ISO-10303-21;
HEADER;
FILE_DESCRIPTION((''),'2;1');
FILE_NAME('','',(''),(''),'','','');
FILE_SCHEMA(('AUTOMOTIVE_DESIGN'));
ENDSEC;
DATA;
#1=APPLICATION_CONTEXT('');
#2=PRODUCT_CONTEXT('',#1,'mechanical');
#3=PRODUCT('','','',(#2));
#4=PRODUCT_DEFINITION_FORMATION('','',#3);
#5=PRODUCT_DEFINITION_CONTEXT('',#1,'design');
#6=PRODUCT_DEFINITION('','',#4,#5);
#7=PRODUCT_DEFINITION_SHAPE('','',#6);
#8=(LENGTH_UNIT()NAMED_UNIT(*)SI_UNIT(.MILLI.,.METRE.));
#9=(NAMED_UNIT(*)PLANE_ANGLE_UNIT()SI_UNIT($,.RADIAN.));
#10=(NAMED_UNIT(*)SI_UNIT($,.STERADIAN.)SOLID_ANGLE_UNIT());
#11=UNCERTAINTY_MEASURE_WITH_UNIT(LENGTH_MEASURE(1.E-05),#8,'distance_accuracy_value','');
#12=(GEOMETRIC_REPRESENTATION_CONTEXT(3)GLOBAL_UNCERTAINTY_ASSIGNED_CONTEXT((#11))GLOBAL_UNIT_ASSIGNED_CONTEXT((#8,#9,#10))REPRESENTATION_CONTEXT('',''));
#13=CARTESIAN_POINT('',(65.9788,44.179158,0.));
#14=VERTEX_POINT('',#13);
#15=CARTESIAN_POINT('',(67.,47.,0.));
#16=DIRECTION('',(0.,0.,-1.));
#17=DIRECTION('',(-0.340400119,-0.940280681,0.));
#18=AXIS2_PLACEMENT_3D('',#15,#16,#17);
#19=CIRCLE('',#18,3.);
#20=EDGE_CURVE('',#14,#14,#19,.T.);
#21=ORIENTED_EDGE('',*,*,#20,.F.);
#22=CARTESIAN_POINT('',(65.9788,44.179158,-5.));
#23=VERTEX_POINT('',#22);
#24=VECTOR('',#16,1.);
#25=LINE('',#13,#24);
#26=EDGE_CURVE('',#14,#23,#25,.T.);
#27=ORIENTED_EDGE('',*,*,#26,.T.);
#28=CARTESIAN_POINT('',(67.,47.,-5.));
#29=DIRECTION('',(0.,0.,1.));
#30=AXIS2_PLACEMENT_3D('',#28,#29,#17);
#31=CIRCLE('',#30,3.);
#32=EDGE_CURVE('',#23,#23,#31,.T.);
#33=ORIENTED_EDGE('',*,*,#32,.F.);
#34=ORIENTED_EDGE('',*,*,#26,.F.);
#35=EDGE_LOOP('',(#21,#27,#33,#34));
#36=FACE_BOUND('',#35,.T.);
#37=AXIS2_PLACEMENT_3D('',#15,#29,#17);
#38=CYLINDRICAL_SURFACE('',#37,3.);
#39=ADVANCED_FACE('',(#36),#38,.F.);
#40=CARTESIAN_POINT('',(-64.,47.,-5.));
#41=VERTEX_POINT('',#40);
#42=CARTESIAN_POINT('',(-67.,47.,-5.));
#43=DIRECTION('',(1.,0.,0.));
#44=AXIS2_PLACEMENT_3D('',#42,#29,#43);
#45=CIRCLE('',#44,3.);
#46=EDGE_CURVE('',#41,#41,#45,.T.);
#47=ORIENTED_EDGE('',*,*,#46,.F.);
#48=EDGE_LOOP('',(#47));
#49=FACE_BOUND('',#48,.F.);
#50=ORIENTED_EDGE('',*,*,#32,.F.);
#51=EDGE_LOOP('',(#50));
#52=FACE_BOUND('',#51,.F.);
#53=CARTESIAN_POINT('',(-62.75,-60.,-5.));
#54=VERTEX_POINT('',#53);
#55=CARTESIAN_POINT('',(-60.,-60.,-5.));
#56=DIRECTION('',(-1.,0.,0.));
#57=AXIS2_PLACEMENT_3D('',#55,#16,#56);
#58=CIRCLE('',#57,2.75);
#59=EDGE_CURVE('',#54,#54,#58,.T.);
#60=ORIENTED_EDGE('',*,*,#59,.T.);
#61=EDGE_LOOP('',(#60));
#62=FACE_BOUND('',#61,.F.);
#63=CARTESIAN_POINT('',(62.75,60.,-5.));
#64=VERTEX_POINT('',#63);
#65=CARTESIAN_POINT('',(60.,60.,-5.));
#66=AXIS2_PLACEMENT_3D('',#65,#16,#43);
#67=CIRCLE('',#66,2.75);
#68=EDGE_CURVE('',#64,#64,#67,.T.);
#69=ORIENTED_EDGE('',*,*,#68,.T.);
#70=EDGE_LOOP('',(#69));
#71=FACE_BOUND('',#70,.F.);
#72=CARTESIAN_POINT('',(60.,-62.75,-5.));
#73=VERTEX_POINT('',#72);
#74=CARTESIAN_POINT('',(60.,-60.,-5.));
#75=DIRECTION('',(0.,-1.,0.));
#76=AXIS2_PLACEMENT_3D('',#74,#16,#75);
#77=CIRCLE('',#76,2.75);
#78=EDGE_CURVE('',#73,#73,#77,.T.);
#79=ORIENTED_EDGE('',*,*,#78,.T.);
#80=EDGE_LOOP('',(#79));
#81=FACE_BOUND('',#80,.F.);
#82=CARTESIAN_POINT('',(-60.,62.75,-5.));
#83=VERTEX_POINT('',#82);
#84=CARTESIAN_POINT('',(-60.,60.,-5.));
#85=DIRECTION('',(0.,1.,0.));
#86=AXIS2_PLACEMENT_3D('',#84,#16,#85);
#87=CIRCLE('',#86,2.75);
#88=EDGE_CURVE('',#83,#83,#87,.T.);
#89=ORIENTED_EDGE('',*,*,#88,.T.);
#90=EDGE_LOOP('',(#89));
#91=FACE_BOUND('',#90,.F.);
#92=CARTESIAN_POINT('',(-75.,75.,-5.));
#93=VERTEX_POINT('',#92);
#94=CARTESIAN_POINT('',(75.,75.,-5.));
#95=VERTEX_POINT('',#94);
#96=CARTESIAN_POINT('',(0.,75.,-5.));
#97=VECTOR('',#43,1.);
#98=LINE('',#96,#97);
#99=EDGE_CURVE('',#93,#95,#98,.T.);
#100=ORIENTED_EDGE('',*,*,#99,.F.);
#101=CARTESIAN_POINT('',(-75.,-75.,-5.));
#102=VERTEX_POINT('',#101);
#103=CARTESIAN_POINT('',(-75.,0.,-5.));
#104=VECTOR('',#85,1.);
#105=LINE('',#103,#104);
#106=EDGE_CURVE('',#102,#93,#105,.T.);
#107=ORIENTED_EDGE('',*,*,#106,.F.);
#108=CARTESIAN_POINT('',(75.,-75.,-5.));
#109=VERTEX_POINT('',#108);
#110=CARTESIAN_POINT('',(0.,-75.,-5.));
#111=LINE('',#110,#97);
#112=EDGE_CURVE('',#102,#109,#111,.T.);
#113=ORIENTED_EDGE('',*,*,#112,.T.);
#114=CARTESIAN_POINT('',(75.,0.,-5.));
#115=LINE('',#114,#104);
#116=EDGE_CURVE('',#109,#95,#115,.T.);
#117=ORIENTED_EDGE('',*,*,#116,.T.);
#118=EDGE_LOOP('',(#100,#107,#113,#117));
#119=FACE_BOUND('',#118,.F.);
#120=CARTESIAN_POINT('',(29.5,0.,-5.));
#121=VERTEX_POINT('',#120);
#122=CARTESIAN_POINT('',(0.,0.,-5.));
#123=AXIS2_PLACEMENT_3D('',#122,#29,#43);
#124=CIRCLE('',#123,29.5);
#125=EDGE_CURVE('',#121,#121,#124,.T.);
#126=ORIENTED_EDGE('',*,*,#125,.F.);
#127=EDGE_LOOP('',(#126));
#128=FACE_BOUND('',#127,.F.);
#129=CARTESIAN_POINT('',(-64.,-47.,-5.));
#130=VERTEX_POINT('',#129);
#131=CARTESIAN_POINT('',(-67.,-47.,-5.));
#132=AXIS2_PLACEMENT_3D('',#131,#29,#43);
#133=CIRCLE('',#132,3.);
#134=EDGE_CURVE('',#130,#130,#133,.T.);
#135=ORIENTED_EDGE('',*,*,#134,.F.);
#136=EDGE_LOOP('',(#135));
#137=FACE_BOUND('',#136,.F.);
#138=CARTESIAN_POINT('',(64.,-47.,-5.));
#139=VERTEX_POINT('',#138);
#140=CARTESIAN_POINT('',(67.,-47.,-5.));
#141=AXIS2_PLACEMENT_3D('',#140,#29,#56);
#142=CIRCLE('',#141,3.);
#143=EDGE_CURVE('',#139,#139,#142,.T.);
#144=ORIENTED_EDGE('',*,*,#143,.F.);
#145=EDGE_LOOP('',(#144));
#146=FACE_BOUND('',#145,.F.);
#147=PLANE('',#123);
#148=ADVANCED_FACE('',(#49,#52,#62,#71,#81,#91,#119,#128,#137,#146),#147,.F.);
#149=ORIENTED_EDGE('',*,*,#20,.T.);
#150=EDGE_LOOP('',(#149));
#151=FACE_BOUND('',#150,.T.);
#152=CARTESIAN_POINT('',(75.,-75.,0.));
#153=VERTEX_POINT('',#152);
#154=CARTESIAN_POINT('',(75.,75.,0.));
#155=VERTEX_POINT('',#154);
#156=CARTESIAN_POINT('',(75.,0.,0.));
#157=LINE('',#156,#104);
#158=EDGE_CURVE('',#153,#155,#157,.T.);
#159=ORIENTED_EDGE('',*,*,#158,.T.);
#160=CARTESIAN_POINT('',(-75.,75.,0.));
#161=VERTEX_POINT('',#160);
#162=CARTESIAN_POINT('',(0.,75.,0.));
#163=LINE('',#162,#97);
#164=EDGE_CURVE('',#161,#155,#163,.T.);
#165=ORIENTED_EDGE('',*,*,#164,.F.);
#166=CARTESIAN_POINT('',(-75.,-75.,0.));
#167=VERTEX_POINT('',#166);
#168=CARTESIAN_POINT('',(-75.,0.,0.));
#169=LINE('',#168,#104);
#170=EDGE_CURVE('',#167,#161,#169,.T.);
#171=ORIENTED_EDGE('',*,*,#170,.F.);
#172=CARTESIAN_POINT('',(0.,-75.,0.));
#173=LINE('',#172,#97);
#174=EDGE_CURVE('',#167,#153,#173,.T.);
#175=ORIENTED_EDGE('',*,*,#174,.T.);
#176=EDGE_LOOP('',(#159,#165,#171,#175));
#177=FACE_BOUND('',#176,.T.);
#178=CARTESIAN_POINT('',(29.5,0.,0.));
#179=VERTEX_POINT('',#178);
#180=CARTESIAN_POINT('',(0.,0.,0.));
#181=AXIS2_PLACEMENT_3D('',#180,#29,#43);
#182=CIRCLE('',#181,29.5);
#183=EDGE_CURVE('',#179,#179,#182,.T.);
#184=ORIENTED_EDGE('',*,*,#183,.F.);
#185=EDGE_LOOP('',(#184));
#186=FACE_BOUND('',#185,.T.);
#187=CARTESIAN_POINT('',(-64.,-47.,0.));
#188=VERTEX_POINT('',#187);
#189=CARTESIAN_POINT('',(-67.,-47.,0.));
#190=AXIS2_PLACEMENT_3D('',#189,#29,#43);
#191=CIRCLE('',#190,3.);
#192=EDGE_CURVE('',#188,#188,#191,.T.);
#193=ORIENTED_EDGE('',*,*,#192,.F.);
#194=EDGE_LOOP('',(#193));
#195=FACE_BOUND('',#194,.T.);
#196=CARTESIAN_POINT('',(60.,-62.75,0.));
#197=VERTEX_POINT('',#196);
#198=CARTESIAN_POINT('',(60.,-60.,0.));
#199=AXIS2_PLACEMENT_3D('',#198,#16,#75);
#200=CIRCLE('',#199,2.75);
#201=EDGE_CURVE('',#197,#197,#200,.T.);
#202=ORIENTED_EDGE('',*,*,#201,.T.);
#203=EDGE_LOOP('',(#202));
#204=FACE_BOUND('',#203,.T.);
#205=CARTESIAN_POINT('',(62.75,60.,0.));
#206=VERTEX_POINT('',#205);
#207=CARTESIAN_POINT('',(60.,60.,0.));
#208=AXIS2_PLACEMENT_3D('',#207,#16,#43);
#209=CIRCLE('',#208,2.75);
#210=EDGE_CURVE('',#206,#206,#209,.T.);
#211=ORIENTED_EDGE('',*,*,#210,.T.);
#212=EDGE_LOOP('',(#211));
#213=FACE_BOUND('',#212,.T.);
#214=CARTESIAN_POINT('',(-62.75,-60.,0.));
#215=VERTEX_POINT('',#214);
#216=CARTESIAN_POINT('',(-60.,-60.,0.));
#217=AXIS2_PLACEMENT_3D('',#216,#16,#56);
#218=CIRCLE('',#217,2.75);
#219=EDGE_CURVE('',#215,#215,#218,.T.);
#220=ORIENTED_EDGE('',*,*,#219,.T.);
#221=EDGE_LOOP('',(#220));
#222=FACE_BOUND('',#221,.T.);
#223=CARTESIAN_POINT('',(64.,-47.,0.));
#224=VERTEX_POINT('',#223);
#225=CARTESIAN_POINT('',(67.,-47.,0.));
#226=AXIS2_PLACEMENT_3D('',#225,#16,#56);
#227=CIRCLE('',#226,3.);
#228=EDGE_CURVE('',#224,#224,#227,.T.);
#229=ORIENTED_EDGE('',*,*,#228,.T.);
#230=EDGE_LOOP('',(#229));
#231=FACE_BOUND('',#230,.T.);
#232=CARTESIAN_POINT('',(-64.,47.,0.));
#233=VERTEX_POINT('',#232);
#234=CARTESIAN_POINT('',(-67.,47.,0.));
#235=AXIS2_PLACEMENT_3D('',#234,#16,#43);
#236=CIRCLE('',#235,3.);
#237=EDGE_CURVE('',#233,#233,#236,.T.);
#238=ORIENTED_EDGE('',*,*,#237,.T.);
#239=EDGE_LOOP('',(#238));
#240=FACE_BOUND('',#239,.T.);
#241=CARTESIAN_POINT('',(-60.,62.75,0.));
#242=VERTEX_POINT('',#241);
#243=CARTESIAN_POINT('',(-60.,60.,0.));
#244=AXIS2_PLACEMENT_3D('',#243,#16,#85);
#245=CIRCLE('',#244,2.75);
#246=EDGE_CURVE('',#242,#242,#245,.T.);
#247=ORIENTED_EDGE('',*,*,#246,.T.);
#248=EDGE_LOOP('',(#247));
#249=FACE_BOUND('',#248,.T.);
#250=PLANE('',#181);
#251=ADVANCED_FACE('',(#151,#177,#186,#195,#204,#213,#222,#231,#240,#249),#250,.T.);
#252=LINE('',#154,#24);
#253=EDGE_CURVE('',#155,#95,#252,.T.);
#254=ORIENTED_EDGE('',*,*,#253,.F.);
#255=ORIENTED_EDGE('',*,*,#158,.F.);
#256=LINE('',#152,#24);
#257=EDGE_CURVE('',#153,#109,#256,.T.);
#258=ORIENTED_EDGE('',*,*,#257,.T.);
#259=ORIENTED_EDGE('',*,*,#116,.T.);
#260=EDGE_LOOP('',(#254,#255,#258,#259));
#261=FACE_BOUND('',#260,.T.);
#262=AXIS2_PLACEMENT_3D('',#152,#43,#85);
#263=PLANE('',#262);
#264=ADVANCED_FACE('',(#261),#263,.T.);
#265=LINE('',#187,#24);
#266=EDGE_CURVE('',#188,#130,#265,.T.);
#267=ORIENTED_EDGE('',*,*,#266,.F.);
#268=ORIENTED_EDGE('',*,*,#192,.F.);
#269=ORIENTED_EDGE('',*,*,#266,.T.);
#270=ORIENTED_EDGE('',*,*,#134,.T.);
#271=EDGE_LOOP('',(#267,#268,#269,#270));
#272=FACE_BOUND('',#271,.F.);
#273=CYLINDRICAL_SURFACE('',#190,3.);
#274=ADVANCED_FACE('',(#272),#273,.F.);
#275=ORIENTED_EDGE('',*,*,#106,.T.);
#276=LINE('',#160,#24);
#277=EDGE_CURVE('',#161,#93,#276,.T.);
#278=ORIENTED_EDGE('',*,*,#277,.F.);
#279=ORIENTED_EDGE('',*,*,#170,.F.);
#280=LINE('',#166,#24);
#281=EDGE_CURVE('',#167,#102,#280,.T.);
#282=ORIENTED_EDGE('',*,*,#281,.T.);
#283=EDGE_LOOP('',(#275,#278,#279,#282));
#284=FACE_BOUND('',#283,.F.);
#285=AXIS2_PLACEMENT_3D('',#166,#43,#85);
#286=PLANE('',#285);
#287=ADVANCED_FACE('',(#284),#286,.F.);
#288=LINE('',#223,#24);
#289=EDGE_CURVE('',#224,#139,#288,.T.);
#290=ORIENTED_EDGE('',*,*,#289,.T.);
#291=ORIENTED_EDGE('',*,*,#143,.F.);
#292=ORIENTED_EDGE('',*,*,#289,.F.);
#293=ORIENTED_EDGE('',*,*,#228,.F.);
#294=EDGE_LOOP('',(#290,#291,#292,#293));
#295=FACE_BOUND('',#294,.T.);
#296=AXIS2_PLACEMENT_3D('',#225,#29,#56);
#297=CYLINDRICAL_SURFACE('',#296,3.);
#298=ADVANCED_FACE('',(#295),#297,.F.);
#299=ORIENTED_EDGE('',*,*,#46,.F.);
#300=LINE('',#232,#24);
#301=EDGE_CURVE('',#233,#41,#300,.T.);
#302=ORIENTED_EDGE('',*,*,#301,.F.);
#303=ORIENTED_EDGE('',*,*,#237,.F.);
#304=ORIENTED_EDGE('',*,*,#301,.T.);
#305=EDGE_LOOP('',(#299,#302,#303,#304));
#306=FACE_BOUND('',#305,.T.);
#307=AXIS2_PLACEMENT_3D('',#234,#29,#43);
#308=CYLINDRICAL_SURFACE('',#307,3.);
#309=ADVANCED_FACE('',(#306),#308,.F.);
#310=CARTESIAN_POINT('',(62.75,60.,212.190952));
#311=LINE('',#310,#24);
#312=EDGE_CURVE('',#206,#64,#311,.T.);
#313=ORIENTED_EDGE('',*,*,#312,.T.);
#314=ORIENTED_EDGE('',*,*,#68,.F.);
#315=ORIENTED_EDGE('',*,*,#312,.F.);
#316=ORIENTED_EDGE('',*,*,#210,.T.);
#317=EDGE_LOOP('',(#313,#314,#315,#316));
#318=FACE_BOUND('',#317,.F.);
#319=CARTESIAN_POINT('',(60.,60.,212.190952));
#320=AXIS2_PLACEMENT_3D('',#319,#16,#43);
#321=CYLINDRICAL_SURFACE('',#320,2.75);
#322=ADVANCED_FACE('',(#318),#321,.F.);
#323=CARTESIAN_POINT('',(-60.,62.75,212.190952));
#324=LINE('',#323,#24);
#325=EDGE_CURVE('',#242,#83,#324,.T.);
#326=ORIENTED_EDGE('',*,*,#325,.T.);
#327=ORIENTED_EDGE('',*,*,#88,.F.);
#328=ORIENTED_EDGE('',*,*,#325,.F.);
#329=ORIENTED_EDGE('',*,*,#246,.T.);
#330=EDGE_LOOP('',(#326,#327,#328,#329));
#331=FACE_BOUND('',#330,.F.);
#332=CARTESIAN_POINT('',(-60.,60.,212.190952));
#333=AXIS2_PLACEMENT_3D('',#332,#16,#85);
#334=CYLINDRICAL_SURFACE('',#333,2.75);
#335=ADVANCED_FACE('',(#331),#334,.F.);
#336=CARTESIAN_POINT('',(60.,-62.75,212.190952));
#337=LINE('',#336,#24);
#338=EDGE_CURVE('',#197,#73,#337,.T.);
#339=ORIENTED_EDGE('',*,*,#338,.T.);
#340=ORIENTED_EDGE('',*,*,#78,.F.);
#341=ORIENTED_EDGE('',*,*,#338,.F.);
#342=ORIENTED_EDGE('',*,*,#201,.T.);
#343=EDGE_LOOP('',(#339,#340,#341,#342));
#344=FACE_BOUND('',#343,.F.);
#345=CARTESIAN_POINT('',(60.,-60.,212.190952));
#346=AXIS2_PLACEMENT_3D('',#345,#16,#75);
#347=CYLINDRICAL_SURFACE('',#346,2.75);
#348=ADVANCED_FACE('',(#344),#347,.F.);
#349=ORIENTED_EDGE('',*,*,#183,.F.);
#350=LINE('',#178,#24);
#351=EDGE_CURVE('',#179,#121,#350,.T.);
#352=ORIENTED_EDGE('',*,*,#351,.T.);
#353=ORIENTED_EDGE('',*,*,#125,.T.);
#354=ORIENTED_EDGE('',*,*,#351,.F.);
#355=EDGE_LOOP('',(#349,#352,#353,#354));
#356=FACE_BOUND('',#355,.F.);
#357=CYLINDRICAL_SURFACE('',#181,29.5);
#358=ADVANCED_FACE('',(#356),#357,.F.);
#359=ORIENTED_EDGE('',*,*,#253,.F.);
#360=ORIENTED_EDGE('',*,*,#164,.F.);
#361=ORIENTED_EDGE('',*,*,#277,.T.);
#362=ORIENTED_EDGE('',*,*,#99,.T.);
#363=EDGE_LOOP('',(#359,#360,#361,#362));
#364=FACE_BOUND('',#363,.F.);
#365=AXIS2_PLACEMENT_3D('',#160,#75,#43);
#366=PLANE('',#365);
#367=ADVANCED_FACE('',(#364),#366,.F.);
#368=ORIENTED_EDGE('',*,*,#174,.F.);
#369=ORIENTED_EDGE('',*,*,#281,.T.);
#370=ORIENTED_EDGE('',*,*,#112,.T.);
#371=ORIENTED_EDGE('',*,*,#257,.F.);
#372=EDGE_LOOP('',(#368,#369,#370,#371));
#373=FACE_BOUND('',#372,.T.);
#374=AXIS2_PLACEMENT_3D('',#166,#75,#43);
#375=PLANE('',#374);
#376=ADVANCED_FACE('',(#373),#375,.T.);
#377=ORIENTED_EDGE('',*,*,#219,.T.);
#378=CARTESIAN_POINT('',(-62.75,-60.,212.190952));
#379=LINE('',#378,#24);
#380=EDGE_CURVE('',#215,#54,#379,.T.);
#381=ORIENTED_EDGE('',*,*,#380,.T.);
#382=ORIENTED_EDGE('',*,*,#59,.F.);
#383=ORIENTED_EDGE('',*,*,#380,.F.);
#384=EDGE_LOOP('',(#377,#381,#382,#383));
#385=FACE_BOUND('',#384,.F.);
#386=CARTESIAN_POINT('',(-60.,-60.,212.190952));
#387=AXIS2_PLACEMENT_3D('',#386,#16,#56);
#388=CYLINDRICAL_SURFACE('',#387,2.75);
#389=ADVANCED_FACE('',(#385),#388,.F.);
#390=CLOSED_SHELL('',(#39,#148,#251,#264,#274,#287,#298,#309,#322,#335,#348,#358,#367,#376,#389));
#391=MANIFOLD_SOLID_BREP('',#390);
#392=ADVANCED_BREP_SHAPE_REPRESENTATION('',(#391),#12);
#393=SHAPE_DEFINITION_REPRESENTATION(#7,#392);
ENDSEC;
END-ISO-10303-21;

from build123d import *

# Parameters (mm, degrees)
F2_W            = 150
F2_H            = 150
F2_R            = 29.5
F3_DEPTH        = 5
F5_D            = 5.5
F5_COPIES_COUNT = 4
F6_R            = 3
F7_DEPTH        = 5.001


# Not quite as in the source:
# - a pattern or mirror of a feature is missing from the dataset's text; its kind, count and spacing are read off the source's solid
# - a feature names something its author has since deleted; it is built from what else it names


with BuildPart() as f3:
    # F2 (on Top) → F3 (new body)
    with BuildSketch(Plane.XY):
        Rectangle(F2_W, F2_H)
        Circle(F2_R, mode=Mode.SUBTRACT)
    extrude(amount=-F3_DEPTH)

    # F5 (through all)
    with Locations(Plane.XY):
        with Locations((-60, -60)):
            f5 = Hole(F5_D / 2)

    # F5_copies: F5 ×4 about axis
    f5_copies_axis = Axis((0, 0, 0), (0, 0, 1))
    for i in range(1, F5_COPIES_COUNT):
        add(f5.rotate(f5_copies_axis, i * 360 / F5_COPIES_COUNT), mode=Mode.SUBTRACT)

    # F6 (on Top) → F7 (cut, through all)
    with BuildSketch(Plane.XY):
        with Locations((-67, -47)):
            Circle(F6_R)
    f7 = extrude(amount=-F7_DEPTH, mode=Mode.SUBTRACT)

    # F7_copies: F7 across plane
    add(f7.mirror(Plane(origin=(0, 0, 0), x_dir=(0, 0, 1), z_dir=(1, 0, 0))), mode=Mode.SUBTRACT)

    # F7_copies1: F7 across plane
    add(f7.mirror(Plane.ZX), mode=Mode.SUBTRACT)

    # F7_copies2: F7 across plane
    add(f7.mirror(Plane(origin=(0, 0, 0), x_dir=(-0.5742821086, 0.818657474, 0), z_dir=(0.818657474, 0.5742821086, 0))), mode=Mode.SUBTRACT)


solid = f3.part
